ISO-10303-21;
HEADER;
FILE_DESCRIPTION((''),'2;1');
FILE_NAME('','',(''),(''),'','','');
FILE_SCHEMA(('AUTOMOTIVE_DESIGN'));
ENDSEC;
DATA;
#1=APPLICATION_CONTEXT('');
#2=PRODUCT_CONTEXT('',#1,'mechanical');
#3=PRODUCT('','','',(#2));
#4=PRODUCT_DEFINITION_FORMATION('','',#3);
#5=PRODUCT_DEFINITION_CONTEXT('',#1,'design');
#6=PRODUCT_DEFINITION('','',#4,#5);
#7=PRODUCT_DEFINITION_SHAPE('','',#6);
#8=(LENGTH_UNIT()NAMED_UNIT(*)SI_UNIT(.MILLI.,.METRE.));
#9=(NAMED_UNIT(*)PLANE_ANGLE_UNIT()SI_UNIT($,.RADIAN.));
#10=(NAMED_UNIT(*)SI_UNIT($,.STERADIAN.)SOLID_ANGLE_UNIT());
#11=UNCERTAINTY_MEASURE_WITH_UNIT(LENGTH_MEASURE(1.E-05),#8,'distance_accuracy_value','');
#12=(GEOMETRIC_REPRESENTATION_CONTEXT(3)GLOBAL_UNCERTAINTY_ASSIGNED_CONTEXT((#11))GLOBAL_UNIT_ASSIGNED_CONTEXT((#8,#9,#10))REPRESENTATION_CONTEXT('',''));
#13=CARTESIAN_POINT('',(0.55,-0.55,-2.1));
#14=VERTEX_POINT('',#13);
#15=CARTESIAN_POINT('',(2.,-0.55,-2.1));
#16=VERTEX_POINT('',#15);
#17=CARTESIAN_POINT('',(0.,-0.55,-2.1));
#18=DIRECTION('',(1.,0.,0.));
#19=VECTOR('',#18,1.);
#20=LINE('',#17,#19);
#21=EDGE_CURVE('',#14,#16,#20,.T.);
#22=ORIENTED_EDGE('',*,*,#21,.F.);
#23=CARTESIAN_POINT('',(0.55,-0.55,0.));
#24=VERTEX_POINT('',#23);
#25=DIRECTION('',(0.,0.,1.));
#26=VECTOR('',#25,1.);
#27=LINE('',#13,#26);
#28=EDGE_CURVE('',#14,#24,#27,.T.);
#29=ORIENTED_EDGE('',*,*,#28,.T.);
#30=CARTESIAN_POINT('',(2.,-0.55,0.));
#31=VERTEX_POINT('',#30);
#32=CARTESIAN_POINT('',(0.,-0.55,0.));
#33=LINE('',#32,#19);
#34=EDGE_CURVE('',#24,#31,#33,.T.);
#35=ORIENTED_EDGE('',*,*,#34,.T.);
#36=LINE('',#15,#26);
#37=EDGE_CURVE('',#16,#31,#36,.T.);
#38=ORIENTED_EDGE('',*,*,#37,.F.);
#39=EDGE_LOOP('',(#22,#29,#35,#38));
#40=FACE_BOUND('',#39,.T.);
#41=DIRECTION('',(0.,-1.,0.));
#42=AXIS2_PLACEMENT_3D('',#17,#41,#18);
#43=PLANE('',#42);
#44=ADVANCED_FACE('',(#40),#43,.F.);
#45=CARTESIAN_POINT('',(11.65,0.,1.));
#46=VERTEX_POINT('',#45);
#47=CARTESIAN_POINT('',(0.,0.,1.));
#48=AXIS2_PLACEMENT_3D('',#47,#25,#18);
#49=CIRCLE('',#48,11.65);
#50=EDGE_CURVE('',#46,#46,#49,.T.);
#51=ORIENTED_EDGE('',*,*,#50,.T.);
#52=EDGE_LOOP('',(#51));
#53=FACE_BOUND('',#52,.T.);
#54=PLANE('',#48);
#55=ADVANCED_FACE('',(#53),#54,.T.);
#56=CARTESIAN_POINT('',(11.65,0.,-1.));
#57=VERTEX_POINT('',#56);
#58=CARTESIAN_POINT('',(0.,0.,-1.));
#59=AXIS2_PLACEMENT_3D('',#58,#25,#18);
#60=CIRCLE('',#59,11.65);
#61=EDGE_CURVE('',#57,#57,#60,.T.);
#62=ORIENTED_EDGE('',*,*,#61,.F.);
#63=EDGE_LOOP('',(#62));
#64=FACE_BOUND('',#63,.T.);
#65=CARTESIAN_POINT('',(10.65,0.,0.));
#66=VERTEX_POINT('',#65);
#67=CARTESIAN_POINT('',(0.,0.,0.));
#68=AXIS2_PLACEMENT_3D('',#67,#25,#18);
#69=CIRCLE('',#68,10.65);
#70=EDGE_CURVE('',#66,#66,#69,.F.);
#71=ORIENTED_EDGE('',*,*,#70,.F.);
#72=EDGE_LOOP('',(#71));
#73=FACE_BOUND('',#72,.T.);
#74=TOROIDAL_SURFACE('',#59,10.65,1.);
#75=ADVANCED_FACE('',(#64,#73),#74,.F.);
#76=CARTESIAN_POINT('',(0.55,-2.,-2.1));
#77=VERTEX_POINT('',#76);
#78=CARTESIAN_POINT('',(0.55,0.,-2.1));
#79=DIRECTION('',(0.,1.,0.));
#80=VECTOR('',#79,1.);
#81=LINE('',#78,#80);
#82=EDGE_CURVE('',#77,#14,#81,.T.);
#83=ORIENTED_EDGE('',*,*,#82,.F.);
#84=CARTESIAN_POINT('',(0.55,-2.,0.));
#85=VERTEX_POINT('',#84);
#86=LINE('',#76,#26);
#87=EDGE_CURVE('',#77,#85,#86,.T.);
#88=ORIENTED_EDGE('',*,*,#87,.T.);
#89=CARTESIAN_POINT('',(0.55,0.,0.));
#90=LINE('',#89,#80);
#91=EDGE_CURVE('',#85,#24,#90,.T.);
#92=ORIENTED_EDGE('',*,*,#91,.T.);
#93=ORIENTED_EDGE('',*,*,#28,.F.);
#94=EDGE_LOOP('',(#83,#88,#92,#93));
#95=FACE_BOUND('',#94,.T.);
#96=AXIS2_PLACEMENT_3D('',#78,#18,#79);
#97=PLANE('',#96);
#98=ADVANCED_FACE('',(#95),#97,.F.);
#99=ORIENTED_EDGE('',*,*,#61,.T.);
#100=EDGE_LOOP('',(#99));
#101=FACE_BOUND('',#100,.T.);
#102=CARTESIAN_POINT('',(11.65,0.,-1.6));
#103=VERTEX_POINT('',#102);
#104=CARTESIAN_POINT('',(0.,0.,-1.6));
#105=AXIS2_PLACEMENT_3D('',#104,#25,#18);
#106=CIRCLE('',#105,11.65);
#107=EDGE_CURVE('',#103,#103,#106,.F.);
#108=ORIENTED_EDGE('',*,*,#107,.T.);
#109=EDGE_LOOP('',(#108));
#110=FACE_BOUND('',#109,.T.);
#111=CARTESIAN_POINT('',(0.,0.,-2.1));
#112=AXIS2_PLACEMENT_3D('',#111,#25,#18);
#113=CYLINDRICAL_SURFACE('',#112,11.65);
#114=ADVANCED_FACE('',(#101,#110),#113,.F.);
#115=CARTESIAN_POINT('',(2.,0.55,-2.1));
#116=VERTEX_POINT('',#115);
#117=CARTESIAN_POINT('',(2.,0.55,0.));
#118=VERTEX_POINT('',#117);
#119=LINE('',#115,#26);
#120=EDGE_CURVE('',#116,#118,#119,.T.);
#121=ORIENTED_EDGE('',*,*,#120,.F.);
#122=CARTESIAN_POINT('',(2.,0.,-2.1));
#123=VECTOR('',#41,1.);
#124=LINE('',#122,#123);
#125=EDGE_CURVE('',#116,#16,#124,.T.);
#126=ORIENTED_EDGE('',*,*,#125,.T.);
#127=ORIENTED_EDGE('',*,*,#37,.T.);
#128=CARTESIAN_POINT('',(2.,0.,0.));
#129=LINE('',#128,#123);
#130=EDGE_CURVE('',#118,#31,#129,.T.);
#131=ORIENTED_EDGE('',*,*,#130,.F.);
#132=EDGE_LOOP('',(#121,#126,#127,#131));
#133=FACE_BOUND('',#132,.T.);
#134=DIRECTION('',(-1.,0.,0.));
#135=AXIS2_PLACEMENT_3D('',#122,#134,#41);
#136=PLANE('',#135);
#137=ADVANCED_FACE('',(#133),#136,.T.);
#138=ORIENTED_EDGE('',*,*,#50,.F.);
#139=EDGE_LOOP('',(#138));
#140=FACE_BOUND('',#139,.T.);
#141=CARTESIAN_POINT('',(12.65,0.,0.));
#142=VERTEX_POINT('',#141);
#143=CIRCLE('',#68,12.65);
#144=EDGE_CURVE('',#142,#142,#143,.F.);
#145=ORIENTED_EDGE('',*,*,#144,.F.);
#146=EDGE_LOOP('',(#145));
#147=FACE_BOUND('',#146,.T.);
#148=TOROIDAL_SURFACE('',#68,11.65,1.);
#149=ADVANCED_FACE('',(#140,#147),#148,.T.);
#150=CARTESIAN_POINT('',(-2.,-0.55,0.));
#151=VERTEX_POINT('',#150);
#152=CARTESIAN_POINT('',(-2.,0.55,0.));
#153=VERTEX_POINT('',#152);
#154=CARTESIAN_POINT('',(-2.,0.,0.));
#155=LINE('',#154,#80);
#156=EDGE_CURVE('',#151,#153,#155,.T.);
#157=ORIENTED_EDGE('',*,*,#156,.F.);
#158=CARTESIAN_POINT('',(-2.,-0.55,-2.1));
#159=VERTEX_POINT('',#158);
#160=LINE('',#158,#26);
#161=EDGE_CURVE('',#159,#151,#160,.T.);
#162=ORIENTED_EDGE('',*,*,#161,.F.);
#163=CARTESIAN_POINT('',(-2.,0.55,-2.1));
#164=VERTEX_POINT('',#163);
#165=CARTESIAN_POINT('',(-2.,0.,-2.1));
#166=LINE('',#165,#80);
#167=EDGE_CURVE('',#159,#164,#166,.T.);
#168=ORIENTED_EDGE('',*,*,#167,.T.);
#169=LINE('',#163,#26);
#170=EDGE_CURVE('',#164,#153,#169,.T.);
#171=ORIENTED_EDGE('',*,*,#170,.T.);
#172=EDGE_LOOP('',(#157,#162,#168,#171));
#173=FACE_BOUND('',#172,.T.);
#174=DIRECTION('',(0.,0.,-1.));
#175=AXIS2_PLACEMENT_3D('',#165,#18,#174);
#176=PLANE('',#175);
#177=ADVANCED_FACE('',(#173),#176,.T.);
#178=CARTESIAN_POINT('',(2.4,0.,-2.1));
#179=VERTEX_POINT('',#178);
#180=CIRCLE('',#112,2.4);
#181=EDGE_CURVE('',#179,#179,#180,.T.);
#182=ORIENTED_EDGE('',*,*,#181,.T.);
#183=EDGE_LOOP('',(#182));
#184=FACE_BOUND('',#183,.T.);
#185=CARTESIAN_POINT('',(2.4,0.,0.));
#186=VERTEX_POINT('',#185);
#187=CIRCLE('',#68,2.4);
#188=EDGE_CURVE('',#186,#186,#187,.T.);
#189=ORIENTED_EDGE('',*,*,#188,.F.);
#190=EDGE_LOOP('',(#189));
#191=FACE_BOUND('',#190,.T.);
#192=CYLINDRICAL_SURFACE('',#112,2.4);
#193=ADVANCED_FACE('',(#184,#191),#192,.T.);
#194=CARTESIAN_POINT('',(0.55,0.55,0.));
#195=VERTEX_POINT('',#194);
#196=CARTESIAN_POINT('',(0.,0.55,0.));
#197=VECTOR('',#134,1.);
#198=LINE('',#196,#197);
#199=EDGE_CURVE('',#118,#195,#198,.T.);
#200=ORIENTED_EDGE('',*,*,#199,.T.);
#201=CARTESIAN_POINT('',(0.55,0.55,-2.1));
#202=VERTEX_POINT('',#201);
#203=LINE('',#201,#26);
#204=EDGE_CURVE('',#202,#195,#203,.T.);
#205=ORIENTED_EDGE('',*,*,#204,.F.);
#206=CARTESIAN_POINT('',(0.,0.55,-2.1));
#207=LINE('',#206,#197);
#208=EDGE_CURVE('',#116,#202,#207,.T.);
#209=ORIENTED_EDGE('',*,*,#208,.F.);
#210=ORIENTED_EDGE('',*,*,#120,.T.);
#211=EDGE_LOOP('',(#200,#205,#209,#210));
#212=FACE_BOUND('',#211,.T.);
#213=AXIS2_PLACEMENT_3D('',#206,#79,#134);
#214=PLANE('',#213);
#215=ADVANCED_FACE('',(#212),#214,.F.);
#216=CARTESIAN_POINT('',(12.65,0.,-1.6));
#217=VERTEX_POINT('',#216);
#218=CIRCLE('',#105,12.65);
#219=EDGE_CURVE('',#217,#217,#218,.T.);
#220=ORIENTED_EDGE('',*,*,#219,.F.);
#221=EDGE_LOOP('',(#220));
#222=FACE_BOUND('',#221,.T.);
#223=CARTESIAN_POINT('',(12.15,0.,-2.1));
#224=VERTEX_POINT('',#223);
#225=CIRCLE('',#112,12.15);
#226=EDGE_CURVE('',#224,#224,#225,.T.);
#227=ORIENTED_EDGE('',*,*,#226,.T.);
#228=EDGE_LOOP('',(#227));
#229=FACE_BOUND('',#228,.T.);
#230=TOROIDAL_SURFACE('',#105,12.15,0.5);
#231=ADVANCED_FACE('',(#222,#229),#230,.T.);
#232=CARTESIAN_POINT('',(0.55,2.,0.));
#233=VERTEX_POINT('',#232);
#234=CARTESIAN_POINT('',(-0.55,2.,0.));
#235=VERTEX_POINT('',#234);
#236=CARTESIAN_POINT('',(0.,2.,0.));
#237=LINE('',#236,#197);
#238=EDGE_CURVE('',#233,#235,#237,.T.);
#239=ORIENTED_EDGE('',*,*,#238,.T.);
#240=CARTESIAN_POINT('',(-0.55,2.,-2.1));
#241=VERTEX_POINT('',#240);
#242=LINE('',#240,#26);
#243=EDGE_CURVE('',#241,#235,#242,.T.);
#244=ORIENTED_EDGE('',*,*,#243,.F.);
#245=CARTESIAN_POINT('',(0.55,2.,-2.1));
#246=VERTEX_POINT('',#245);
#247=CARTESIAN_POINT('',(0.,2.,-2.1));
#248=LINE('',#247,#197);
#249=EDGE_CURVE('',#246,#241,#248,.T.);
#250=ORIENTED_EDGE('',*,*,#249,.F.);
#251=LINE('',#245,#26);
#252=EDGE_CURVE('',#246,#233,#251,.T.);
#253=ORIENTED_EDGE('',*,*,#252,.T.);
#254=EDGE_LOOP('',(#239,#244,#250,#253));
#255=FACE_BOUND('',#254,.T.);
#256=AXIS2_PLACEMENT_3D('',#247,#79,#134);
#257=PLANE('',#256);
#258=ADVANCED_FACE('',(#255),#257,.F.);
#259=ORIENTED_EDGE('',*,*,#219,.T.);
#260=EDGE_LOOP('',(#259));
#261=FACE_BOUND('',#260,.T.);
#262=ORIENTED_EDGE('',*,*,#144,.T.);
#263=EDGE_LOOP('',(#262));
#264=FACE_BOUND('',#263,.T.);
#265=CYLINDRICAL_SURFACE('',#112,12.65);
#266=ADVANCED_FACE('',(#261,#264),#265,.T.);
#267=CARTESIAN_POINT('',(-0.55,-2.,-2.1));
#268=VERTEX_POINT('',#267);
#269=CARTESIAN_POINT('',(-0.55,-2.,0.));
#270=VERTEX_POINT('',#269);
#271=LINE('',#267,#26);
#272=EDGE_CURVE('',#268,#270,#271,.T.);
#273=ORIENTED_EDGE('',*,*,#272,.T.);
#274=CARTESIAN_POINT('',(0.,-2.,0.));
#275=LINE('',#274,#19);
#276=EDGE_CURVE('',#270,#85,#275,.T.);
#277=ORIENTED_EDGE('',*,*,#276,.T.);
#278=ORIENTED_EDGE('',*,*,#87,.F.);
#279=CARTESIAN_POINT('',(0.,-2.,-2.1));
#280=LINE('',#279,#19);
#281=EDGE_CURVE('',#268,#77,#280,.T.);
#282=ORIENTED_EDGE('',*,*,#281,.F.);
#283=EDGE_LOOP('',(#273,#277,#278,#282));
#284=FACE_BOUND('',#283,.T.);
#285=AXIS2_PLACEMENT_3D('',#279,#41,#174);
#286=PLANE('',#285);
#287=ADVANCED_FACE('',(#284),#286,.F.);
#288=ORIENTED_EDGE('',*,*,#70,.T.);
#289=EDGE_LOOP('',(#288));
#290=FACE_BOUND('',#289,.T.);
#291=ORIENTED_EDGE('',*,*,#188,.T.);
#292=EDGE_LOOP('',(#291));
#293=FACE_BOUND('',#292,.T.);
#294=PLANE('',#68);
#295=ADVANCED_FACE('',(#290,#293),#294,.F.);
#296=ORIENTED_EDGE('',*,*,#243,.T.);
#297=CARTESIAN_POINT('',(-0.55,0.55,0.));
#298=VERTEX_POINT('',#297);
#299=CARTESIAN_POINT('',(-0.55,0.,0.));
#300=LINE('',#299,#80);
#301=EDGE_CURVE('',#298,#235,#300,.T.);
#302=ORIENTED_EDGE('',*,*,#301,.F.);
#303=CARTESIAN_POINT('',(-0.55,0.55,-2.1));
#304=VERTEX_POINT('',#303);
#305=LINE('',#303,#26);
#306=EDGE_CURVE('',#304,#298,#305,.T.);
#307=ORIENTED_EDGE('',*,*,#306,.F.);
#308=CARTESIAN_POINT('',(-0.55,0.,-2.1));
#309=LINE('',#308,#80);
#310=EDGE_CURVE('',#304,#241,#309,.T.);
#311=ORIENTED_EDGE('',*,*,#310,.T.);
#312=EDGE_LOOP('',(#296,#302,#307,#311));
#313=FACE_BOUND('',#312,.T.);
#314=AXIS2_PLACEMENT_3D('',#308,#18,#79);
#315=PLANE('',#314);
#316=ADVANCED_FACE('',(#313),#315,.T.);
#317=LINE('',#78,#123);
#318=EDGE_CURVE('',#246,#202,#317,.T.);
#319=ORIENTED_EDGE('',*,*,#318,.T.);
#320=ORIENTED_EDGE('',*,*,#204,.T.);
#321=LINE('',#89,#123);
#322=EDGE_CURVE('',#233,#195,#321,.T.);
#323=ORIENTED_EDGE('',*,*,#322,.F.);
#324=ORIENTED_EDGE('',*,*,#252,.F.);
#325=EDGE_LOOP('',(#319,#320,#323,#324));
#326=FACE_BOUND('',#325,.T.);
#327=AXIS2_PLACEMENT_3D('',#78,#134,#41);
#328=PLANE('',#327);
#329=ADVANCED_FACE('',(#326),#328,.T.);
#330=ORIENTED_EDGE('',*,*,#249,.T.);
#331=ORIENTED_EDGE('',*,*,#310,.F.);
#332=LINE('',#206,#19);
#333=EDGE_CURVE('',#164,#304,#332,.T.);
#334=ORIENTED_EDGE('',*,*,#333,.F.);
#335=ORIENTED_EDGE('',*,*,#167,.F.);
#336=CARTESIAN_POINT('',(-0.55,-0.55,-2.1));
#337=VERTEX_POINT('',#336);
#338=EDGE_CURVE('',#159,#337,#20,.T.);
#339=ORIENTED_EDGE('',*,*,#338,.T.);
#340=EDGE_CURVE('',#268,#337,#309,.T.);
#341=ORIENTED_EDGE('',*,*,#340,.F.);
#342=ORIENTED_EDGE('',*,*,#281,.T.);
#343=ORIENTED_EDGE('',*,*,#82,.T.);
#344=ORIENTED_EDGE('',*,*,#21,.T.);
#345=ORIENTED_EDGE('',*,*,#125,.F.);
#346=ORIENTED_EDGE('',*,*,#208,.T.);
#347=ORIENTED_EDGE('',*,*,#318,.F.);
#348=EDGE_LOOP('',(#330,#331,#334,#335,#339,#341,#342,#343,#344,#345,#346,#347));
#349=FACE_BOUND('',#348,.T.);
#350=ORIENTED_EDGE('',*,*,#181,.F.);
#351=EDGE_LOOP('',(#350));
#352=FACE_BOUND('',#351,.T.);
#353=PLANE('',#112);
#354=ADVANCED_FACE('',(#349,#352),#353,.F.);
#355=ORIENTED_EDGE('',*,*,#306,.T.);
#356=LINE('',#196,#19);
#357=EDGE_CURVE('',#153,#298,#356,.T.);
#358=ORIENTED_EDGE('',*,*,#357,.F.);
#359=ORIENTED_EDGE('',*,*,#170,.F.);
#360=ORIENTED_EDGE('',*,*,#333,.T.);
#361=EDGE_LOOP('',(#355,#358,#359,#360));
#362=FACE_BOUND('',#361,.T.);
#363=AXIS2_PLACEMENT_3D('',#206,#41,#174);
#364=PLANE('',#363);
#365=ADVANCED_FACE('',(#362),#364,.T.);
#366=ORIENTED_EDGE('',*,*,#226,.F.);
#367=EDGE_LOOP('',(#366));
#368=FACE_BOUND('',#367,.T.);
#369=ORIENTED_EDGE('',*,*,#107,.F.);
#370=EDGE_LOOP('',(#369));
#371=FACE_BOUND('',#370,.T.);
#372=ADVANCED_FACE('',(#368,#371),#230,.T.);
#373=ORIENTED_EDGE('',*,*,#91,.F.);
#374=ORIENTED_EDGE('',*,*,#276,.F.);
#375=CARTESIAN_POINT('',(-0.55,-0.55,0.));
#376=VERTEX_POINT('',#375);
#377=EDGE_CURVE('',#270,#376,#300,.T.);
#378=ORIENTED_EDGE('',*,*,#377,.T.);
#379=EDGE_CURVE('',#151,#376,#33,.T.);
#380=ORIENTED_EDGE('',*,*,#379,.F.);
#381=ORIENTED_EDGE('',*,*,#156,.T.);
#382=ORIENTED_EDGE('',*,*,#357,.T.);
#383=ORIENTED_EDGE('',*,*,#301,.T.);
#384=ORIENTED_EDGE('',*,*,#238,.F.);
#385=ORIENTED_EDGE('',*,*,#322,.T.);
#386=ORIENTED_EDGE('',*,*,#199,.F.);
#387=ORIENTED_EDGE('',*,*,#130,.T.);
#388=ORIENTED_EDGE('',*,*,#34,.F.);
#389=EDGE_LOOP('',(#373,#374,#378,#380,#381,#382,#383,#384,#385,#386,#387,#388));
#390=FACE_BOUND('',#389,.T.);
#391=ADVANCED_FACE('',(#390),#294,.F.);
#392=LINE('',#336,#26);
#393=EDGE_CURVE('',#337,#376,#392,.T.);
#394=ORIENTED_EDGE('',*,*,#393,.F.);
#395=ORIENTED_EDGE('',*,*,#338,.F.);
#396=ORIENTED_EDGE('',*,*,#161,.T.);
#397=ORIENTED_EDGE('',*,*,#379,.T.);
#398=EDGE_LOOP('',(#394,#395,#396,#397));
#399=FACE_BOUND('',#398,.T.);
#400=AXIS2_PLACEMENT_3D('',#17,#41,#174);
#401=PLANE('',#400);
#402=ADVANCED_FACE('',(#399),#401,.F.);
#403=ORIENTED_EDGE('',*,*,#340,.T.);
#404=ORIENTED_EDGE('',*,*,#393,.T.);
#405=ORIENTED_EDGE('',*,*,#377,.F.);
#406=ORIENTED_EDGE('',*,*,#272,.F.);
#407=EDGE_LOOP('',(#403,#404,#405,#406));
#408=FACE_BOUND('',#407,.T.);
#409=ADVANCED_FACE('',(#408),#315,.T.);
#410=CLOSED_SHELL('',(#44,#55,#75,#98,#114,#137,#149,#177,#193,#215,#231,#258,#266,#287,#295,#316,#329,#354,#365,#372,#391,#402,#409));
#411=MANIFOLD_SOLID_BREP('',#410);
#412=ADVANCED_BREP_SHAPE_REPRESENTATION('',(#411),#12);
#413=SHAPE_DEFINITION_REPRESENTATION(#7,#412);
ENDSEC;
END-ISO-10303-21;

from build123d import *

# Parameters (mm, degrees)
SKETCH_1_R           = 2.4
EXTRUDE_1_DEPTH      = 2.1
EXTRUDE_START        = 1
SKETCH_1_9_R         = 11.65
SKETCH_1_9_R_2       = 2.4
EXTRUDE_2_DEPTH      = 1
EXTRUDE_3_DEPTH      = 1
EXTRUDE_3_DEPTH_BACK = 2.1
SKETCH_1_10_R        = 12.65
SKETCH_1_10_R_2      = 11.65
FILLET_1_R           = 1
FILLET_2_R           = 0.5
FILLET_3_R           = 0.5
FILLET_4_R           = 1


with BuildPart() as part:
    # 草图1 → 凸台-拉伸1 (new body)
    with BuildSketch(Plane.XY):
        Circle(SKETCH_1_R)
        Polygon((0.55, -2), (0.55, -0.55), (2, -0.55), (2, 0.55), (0.55, 0.55), (0.55, 2), (-0.55, 2), (-0.55, 0.55), (-2, 0.55), (-2, -0.55), (-0.55, -0.55), (-0.55, -2), align=None, mode=Mode.SUBTRACT)
    extrude(amount=-EXTRUDE_1_DEPTH)

    # 草图1<9> → 凸台-拉伸2 (add)
    # profile 1 of 3: a face of its own
    with BuildSketch(Plane.XY.offset(EXTRUDE_START)):
        Circle(SKETCH_1_9_R)
        Circle(SKETCH_1_9_R_2, mode=Mode.SUBTRACT)
    # profile 2 of 3: a face of its own
    with BuildSketch(Plane.XY.offset(EXTRUDE_START)):
        Circle(SKETCH_1_9_R_2)
        Polygon((0.55, -2), (0.55, -0.55), (2, -0.55), (2, 0.55), (0.55, 0.55), (0.55, 2), (-0.55, 2), (-0.55, 0.55), (-2, 0.55), (-2, -0.55), (-0.55, -0.55), (-0.55, -2), align=None, mode=Mode.SUBTRACT)
    # profile 3 of 3: a face of its own
    with BuildSketch(Plane.XY.offset(EXTRUDE_START)):
        Polygon((-0.55, -2), (0.55, -2), (0.55, -0.55), (2, -0.55), (2, 0.55), (0.55, 0.55), (0.55, 2), (-0.55, 2), (-0.55, 0.55), (-2, 0.55), (-2, -0.55), (-0.55, -0.55), align=None)
    extrude(amount=-EXTRUDE_2_DEPTH)

    # 草图1<10> → 凸台-拉伸3 (add, two sides: drawn at the far end of the back side and taken through both)
    with BuildSketch(Plane.XY.offset(-EXTRUDE_3_DEPTH_BACK)):
        Circle(SKETCH_1_10_R)
        Circle(SKETCH_1_10_R_2, mode=Mode.SUBTRACT)
    extrude(amount=EXTRUDE_3_DEPTH + EXTRUDE_3_DEPTH_BACK)

    # 圆角1
    fillet_1_edges = [part.edges().sort_by_distance(p)[0] for p in [
        (-12.65, 0, 1),
    ]]
    fillet(fillet_1_edges, radius=FILLET_1_R - 0.0001)  # a hair under: the kernel refuses the full size

    # 圆角2
    fillet_2_edges = [part.edges().sort_by_distance(p)[0] for p in [
        (-11.65, 0, -2.1),
    ]]
    fillet(fillet_2_edges, radius=FILLET_2_R)

    # 圆角3
    fillet_3_edges = [part.edges().sort_by_distance(p)[0] for p in [
        (-12.65, 0, -2.1),
    ]]
    fillet(fillet_3_edges, radius=FILLET_3_R - 0.0001)  # a hair under: the kernel refuses the full size

    # 圆角4
    fillet_4_edges = [part.edges().sort_by_distance(p)[0] for p in [
        (-11.65, 0, 0),
    ]]
    fillet(fillet_4_edges, radius=FILLET_4_R)


solid = part.part
